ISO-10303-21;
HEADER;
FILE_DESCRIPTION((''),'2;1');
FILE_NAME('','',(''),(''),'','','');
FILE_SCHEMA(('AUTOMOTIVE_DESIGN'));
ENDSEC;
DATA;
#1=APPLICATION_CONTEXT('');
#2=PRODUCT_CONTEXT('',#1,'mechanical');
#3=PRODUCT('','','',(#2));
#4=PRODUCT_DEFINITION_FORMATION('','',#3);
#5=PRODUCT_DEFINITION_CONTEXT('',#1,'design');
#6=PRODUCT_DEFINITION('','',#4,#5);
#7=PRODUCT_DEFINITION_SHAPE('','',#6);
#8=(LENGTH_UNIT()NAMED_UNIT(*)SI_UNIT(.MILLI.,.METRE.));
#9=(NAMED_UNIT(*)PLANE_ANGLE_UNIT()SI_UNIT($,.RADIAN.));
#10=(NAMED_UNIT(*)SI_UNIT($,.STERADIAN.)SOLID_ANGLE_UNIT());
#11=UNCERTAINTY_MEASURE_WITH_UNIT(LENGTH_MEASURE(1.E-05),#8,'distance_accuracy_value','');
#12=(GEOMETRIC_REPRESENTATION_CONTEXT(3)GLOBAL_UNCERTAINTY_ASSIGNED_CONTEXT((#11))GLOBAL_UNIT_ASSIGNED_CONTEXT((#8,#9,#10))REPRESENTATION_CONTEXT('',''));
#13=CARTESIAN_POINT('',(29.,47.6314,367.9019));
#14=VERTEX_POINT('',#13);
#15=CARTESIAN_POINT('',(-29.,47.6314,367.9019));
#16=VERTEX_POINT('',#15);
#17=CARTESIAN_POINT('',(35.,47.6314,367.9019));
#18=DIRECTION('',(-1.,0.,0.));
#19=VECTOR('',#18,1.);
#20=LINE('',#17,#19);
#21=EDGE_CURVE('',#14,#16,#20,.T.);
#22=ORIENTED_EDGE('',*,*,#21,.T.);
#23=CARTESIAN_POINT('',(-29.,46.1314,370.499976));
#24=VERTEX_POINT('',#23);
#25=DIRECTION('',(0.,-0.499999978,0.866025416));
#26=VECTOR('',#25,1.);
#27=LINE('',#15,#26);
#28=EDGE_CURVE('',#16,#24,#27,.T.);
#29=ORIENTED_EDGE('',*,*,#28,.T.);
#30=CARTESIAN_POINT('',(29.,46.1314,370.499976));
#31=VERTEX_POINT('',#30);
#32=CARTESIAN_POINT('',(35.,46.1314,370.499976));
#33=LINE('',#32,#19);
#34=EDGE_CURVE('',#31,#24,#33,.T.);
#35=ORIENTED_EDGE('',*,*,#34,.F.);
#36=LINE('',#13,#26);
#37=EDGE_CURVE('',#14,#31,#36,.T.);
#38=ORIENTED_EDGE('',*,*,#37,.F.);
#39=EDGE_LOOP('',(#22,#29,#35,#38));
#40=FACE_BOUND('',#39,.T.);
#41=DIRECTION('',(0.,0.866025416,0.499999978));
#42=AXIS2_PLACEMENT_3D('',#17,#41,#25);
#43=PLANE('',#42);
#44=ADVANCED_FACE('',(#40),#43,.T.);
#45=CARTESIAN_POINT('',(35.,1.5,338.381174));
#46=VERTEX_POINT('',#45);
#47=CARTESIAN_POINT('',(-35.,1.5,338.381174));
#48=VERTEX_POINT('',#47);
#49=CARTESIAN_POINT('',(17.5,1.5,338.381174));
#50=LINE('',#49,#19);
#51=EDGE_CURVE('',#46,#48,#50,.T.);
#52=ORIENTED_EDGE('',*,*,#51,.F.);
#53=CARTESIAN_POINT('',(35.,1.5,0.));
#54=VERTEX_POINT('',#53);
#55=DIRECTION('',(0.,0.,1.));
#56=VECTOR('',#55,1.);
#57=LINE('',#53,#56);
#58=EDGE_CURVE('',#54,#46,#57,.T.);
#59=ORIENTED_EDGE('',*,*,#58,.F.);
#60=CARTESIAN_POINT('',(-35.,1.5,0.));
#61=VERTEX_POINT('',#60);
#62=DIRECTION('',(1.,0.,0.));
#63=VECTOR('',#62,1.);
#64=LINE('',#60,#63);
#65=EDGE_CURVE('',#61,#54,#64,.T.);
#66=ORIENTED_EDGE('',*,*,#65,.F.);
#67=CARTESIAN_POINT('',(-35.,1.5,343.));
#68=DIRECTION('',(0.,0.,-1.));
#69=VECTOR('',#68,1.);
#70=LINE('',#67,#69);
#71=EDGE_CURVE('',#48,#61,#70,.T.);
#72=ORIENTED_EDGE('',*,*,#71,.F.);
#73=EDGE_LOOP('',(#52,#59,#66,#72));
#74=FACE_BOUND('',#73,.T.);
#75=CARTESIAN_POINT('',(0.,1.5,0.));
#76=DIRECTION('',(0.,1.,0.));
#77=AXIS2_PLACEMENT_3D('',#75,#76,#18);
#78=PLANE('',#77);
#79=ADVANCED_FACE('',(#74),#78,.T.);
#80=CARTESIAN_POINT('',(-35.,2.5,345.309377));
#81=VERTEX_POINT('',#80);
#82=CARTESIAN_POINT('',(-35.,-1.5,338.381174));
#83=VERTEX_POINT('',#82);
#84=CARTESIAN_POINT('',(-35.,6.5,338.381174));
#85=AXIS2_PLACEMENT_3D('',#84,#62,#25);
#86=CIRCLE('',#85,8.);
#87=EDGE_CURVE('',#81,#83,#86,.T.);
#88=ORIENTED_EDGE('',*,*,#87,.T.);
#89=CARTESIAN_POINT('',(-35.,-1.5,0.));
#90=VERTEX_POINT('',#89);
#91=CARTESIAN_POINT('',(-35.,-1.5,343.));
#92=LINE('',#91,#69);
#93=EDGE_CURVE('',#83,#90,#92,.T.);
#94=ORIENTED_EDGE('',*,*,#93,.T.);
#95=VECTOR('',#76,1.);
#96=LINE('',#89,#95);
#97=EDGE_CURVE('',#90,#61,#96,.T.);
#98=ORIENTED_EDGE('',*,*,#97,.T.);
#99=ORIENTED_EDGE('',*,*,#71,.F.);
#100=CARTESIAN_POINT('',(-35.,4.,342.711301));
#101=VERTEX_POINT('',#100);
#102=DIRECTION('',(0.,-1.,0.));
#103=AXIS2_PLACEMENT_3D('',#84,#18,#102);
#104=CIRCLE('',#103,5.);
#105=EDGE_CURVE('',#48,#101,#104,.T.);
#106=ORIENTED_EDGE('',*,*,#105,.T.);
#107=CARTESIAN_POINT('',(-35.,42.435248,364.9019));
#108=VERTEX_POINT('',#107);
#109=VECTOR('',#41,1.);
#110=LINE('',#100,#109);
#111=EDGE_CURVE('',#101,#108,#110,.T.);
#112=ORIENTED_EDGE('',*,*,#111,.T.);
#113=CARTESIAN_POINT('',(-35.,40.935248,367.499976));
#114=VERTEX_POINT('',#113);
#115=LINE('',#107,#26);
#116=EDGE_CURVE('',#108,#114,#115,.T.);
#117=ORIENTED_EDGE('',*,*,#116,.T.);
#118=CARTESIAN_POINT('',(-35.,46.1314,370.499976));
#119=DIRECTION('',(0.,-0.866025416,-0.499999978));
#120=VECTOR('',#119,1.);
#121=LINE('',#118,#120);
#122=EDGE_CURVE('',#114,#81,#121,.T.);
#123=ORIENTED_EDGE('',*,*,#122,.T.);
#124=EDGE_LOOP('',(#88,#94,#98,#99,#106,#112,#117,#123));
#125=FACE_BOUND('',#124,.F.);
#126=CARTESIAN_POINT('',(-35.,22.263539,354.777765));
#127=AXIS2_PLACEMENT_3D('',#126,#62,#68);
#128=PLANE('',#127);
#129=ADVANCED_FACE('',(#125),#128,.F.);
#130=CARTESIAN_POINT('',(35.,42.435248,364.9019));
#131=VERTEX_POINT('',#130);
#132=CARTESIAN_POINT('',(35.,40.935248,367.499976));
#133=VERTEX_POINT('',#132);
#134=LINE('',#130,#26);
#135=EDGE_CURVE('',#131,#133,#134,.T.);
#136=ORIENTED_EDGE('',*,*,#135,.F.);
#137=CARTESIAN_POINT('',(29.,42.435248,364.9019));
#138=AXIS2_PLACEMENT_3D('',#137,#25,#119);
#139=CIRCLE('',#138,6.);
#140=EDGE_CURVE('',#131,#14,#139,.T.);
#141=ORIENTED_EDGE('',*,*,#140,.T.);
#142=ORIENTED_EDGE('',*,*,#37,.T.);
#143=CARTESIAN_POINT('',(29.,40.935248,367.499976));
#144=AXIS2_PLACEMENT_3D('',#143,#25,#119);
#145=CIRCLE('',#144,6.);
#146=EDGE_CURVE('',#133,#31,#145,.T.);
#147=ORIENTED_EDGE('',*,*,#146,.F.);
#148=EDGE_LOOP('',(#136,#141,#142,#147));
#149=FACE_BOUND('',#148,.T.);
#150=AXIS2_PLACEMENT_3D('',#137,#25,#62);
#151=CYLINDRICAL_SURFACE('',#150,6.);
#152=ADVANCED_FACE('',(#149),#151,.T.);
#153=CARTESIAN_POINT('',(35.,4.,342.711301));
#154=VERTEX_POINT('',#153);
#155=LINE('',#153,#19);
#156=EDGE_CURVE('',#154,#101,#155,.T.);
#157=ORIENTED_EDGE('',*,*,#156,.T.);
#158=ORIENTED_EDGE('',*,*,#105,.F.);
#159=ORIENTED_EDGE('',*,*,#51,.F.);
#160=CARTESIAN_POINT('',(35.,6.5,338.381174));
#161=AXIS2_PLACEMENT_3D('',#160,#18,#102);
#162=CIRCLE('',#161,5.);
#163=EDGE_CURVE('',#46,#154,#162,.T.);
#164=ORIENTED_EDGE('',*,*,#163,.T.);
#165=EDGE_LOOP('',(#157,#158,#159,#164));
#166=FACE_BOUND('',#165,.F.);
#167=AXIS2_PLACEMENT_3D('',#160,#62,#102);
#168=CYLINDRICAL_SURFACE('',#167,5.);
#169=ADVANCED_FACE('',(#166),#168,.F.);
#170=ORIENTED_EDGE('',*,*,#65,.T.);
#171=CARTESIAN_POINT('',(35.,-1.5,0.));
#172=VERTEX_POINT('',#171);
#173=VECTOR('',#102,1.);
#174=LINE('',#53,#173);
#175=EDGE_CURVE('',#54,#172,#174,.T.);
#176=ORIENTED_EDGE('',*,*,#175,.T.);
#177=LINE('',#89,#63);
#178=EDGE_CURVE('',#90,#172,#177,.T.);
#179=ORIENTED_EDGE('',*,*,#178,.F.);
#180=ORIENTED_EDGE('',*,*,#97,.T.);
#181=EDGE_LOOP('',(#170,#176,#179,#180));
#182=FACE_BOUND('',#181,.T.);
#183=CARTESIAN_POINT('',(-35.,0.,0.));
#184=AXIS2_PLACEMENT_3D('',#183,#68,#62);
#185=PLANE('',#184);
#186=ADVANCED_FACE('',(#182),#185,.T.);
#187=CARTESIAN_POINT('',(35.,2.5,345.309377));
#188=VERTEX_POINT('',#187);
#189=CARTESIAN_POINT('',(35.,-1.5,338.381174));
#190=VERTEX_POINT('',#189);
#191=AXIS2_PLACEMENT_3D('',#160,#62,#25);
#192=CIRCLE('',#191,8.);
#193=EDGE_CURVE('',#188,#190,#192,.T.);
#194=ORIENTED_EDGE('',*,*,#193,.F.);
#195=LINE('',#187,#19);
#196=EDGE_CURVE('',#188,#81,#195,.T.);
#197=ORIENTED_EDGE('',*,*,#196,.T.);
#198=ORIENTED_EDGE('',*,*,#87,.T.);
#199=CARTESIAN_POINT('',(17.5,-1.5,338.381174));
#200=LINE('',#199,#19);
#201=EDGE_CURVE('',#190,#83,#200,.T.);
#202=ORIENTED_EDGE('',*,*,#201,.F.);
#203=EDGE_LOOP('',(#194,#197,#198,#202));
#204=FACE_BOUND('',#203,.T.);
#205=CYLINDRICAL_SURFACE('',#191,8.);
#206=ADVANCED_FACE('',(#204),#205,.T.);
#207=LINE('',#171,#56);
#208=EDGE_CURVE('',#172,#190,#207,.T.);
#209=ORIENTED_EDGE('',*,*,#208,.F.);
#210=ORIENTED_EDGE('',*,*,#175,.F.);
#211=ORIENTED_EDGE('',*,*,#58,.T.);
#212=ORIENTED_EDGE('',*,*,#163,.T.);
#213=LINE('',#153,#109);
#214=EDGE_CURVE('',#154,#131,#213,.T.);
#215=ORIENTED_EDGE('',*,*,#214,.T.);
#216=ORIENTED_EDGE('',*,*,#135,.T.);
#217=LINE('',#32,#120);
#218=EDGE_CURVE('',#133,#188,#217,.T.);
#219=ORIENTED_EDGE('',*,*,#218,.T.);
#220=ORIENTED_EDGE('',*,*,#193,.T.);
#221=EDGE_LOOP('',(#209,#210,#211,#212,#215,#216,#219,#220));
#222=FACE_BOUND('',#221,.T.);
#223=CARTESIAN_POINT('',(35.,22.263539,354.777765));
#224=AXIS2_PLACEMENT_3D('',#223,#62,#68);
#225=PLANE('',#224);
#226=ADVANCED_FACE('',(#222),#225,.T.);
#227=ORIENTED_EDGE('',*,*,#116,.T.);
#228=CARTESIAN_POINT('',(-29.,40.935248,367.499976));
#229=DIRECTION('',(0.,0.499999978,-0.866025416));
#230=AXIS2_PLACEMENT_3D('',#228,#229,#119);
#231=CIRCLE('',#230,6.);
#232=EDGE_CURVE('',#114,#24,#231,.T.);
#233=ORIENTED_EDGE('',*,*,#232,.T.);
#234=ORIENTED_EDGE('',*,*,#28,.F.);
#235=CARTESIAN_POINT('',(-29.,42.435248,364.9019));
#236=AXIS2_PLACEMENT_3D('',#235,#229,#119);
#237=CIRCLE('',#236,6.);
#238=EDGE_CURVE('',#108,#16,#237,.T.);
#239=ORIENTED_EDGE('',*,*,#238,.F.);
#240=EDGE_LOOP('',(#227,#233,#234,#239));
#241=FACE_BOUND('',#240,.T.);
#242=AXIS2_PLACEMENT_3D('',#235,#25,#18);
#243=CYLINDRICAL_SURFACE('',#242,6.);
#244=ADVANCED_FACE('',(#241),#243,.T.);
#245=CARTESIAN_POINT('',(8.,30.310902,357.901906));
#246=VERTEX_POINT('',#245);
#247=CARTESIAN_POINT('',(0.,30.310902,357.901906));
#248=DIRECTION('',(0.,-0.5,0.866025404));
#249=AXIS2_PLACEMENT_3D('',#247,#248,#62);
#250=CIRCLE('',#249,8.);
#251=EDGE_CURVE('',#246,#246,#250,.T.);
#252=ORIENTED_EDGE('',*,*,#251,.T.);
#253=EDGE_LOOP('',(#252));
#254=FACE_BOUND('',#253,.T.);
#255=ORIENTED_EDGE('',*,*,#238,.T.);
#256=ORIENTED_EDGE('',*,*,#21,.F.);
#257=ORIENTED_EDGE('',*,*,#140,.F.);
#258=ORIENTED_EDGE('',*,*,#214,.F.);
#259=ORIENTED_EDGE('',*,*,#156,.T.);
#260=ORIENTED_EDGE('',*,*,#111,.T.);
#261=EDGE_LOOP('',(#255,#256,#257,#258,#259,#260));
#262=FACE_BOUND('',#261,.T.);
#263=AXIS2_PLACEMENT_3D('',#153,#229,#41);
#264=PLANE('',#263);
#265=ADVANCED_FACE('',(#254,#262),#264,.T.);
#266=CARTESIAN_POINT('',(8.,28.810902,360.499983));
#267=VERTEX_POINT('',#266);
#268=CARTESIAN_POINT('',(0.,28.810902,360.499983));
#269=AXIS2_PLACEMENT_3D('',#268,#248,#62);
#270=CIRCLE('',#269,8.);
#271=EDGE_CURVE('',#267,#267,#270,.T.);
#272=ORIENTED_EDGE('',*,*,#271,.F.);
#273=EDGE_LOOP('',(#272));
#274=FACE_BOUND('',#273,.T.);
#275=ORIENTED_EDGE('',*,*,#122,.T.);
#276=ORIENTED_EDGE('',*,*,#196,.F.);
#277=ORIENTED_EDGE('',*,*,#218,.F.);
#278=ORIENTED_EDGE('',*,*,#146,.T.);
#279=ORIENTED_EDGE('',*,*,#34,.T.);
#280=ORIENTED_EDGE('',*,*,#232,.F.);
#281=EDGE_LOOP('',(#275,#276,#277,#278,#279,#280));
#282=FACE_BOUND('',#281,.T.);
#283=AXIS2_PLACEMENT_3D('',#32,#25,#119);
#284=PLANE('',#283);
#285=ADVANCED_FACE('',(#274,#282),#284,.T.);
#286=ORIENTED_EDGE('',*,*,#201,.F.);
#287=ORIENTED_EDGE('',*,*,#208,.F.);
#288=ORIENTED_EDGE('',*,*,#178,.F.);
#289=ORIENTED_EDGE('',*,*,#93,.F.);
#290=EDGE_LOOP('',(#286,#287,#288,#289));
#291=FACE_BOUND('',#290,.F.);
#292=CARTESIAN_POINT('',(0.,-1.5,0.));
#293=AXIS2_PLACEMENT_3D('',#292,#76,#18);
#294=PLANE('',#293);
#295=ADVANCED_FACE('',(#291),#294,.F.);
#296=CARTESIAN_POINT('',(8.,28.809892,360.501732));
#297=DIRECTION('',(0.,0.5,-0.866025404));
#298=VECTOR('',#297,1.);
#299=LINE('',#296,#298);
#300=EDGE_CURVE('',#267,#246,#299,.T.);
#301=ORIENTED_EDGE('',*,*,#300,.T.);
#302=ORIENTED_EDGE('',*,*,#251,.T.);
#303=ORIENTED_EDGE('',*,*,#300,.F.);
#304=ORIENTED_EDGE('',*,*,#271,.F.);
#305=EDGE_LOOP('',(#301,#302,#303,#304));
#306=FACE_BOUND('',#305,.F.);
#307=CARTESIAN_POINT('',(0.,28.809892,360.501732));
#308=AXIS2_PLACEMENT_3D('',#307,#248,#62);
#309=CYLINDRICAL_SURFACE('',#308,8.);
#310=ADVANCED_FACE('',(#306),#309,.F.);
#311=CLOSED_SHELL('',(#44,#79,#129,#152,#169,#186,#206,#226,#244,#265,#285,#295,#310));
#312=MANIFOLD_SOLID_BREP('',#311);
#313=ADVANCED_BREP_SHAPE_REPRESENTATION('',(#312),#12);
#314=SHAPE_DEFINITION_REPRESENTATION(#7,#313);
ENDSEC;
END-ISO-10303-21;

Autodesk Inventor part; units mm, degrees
ref_plane "YZ Plane" through (0, 0, 0) normal (1, 0, 0) x (0, 1, 0)
ref_plane "XZ Plane" through (0, 0, 0) normal (0, 1, 0) x (-1, 0, 0)
ref_plane "XY Plane" through (0, 0, 0) normal (0, 0, 1) x (1, 0, 0)
sketch "Sketch1" plane through (0, 0, 0) normal (0, 1, 0) x (-1, 0, 0)
  line L0 (35, 0) -> (-35, 0)
  line L1 (-35, 0) -> (-35, 343)
  line L2 (-35, 343) -> (35, 343)
  line L3 (35, 343) -> (35, 0)
  point P0 (0, 0)
  point P1 (0, 0)
  point P2 (0, 0)
  dimension "d7" = 70
  dimension "d8" = 343
extrude "Plate1" add sketch "Sketch1" along normal mid plane 3
sketch "Sketch2" plane through (35, 0, 340.4019) normal (0, -0.5, 0.8660254) x (1, 0, 0)
  line L0 (-70, 0) -> (0, 0)
  line L1 (0, 0) -> (0, 55)
  line L2 (0, 55) -> (-70, 55)
  line L3 (-70, 55) -> (-70, 0)
edge flange "Flange1" height 55 angle 60 thickness 3 bend radius 5 thickness toward (0, -0.5, 0.8660254) relief round relief width 3 relief depth 1.5 edges at (0, 1.5, 343) wall of the first edge with corners at (-35, 0, 340.4019) (35, 0, 340.4019) (35, 47.6314, 367.9019) (-35, 47.6314, 367.9019)
bend "Bend1"
corner "Corner1"
sketch "Sketch3" plane through (-35, 46.1314, 370.5) normal (0, -0.5, 0.8660254) x (1, 0, 0)
  circle A0 centre (35, -20) radius 8
  line L0 (0, 0) -> (70, 0) projected
  point P0 (35, -225.201)
  point P1 (35, 0)
  dimension "d19" = 20
  dimension "d20" = 16
extrude "Cut1" cut sketch "Sketch3" against normal blind 3
fillet "Corner Round1" radius 6 2 edges at (35, 46.8814, 369.201) (-35, 46.8814, 369.201)
equation "\"d21\" = Thickness"
equation "\"d6\" = Thickness"
equation "\"d9\" = BendReliefWidth"
equation "\"d10\" = BendReliefDepth"
equation "\"d11\" = MinimumRemnant"
equation "\"d12\" = TransitionRadius"
equation "\"d15\" = BendRadius"
equation "\"d16\" = CornerReliefSize"
equation "\"d17\" = GapSize"
equation "\"d18\" = JacobiRadiusSize"
equation "\"BendReliefWidth\" = Thickness"
equation "\"BendReliefDepth\" = 0.5 * Thickness"
equation "\"CornerReliefSize\" = 4 * Thickness"
equation "\"MinimumRemnant\" = 2 * Thickness"
equation "\"TransitionRadius\" = BendRadius"
equation "\"JacobiRadiusSize\" = BendRadius"
equation "\"GapSize\" = Thickness"
equation "\"Thickness\" = 3"
equation "\"BendRadius\" = 5"
properties part number "MSC 202 GRID CORNER" material "Stainless Steel"
